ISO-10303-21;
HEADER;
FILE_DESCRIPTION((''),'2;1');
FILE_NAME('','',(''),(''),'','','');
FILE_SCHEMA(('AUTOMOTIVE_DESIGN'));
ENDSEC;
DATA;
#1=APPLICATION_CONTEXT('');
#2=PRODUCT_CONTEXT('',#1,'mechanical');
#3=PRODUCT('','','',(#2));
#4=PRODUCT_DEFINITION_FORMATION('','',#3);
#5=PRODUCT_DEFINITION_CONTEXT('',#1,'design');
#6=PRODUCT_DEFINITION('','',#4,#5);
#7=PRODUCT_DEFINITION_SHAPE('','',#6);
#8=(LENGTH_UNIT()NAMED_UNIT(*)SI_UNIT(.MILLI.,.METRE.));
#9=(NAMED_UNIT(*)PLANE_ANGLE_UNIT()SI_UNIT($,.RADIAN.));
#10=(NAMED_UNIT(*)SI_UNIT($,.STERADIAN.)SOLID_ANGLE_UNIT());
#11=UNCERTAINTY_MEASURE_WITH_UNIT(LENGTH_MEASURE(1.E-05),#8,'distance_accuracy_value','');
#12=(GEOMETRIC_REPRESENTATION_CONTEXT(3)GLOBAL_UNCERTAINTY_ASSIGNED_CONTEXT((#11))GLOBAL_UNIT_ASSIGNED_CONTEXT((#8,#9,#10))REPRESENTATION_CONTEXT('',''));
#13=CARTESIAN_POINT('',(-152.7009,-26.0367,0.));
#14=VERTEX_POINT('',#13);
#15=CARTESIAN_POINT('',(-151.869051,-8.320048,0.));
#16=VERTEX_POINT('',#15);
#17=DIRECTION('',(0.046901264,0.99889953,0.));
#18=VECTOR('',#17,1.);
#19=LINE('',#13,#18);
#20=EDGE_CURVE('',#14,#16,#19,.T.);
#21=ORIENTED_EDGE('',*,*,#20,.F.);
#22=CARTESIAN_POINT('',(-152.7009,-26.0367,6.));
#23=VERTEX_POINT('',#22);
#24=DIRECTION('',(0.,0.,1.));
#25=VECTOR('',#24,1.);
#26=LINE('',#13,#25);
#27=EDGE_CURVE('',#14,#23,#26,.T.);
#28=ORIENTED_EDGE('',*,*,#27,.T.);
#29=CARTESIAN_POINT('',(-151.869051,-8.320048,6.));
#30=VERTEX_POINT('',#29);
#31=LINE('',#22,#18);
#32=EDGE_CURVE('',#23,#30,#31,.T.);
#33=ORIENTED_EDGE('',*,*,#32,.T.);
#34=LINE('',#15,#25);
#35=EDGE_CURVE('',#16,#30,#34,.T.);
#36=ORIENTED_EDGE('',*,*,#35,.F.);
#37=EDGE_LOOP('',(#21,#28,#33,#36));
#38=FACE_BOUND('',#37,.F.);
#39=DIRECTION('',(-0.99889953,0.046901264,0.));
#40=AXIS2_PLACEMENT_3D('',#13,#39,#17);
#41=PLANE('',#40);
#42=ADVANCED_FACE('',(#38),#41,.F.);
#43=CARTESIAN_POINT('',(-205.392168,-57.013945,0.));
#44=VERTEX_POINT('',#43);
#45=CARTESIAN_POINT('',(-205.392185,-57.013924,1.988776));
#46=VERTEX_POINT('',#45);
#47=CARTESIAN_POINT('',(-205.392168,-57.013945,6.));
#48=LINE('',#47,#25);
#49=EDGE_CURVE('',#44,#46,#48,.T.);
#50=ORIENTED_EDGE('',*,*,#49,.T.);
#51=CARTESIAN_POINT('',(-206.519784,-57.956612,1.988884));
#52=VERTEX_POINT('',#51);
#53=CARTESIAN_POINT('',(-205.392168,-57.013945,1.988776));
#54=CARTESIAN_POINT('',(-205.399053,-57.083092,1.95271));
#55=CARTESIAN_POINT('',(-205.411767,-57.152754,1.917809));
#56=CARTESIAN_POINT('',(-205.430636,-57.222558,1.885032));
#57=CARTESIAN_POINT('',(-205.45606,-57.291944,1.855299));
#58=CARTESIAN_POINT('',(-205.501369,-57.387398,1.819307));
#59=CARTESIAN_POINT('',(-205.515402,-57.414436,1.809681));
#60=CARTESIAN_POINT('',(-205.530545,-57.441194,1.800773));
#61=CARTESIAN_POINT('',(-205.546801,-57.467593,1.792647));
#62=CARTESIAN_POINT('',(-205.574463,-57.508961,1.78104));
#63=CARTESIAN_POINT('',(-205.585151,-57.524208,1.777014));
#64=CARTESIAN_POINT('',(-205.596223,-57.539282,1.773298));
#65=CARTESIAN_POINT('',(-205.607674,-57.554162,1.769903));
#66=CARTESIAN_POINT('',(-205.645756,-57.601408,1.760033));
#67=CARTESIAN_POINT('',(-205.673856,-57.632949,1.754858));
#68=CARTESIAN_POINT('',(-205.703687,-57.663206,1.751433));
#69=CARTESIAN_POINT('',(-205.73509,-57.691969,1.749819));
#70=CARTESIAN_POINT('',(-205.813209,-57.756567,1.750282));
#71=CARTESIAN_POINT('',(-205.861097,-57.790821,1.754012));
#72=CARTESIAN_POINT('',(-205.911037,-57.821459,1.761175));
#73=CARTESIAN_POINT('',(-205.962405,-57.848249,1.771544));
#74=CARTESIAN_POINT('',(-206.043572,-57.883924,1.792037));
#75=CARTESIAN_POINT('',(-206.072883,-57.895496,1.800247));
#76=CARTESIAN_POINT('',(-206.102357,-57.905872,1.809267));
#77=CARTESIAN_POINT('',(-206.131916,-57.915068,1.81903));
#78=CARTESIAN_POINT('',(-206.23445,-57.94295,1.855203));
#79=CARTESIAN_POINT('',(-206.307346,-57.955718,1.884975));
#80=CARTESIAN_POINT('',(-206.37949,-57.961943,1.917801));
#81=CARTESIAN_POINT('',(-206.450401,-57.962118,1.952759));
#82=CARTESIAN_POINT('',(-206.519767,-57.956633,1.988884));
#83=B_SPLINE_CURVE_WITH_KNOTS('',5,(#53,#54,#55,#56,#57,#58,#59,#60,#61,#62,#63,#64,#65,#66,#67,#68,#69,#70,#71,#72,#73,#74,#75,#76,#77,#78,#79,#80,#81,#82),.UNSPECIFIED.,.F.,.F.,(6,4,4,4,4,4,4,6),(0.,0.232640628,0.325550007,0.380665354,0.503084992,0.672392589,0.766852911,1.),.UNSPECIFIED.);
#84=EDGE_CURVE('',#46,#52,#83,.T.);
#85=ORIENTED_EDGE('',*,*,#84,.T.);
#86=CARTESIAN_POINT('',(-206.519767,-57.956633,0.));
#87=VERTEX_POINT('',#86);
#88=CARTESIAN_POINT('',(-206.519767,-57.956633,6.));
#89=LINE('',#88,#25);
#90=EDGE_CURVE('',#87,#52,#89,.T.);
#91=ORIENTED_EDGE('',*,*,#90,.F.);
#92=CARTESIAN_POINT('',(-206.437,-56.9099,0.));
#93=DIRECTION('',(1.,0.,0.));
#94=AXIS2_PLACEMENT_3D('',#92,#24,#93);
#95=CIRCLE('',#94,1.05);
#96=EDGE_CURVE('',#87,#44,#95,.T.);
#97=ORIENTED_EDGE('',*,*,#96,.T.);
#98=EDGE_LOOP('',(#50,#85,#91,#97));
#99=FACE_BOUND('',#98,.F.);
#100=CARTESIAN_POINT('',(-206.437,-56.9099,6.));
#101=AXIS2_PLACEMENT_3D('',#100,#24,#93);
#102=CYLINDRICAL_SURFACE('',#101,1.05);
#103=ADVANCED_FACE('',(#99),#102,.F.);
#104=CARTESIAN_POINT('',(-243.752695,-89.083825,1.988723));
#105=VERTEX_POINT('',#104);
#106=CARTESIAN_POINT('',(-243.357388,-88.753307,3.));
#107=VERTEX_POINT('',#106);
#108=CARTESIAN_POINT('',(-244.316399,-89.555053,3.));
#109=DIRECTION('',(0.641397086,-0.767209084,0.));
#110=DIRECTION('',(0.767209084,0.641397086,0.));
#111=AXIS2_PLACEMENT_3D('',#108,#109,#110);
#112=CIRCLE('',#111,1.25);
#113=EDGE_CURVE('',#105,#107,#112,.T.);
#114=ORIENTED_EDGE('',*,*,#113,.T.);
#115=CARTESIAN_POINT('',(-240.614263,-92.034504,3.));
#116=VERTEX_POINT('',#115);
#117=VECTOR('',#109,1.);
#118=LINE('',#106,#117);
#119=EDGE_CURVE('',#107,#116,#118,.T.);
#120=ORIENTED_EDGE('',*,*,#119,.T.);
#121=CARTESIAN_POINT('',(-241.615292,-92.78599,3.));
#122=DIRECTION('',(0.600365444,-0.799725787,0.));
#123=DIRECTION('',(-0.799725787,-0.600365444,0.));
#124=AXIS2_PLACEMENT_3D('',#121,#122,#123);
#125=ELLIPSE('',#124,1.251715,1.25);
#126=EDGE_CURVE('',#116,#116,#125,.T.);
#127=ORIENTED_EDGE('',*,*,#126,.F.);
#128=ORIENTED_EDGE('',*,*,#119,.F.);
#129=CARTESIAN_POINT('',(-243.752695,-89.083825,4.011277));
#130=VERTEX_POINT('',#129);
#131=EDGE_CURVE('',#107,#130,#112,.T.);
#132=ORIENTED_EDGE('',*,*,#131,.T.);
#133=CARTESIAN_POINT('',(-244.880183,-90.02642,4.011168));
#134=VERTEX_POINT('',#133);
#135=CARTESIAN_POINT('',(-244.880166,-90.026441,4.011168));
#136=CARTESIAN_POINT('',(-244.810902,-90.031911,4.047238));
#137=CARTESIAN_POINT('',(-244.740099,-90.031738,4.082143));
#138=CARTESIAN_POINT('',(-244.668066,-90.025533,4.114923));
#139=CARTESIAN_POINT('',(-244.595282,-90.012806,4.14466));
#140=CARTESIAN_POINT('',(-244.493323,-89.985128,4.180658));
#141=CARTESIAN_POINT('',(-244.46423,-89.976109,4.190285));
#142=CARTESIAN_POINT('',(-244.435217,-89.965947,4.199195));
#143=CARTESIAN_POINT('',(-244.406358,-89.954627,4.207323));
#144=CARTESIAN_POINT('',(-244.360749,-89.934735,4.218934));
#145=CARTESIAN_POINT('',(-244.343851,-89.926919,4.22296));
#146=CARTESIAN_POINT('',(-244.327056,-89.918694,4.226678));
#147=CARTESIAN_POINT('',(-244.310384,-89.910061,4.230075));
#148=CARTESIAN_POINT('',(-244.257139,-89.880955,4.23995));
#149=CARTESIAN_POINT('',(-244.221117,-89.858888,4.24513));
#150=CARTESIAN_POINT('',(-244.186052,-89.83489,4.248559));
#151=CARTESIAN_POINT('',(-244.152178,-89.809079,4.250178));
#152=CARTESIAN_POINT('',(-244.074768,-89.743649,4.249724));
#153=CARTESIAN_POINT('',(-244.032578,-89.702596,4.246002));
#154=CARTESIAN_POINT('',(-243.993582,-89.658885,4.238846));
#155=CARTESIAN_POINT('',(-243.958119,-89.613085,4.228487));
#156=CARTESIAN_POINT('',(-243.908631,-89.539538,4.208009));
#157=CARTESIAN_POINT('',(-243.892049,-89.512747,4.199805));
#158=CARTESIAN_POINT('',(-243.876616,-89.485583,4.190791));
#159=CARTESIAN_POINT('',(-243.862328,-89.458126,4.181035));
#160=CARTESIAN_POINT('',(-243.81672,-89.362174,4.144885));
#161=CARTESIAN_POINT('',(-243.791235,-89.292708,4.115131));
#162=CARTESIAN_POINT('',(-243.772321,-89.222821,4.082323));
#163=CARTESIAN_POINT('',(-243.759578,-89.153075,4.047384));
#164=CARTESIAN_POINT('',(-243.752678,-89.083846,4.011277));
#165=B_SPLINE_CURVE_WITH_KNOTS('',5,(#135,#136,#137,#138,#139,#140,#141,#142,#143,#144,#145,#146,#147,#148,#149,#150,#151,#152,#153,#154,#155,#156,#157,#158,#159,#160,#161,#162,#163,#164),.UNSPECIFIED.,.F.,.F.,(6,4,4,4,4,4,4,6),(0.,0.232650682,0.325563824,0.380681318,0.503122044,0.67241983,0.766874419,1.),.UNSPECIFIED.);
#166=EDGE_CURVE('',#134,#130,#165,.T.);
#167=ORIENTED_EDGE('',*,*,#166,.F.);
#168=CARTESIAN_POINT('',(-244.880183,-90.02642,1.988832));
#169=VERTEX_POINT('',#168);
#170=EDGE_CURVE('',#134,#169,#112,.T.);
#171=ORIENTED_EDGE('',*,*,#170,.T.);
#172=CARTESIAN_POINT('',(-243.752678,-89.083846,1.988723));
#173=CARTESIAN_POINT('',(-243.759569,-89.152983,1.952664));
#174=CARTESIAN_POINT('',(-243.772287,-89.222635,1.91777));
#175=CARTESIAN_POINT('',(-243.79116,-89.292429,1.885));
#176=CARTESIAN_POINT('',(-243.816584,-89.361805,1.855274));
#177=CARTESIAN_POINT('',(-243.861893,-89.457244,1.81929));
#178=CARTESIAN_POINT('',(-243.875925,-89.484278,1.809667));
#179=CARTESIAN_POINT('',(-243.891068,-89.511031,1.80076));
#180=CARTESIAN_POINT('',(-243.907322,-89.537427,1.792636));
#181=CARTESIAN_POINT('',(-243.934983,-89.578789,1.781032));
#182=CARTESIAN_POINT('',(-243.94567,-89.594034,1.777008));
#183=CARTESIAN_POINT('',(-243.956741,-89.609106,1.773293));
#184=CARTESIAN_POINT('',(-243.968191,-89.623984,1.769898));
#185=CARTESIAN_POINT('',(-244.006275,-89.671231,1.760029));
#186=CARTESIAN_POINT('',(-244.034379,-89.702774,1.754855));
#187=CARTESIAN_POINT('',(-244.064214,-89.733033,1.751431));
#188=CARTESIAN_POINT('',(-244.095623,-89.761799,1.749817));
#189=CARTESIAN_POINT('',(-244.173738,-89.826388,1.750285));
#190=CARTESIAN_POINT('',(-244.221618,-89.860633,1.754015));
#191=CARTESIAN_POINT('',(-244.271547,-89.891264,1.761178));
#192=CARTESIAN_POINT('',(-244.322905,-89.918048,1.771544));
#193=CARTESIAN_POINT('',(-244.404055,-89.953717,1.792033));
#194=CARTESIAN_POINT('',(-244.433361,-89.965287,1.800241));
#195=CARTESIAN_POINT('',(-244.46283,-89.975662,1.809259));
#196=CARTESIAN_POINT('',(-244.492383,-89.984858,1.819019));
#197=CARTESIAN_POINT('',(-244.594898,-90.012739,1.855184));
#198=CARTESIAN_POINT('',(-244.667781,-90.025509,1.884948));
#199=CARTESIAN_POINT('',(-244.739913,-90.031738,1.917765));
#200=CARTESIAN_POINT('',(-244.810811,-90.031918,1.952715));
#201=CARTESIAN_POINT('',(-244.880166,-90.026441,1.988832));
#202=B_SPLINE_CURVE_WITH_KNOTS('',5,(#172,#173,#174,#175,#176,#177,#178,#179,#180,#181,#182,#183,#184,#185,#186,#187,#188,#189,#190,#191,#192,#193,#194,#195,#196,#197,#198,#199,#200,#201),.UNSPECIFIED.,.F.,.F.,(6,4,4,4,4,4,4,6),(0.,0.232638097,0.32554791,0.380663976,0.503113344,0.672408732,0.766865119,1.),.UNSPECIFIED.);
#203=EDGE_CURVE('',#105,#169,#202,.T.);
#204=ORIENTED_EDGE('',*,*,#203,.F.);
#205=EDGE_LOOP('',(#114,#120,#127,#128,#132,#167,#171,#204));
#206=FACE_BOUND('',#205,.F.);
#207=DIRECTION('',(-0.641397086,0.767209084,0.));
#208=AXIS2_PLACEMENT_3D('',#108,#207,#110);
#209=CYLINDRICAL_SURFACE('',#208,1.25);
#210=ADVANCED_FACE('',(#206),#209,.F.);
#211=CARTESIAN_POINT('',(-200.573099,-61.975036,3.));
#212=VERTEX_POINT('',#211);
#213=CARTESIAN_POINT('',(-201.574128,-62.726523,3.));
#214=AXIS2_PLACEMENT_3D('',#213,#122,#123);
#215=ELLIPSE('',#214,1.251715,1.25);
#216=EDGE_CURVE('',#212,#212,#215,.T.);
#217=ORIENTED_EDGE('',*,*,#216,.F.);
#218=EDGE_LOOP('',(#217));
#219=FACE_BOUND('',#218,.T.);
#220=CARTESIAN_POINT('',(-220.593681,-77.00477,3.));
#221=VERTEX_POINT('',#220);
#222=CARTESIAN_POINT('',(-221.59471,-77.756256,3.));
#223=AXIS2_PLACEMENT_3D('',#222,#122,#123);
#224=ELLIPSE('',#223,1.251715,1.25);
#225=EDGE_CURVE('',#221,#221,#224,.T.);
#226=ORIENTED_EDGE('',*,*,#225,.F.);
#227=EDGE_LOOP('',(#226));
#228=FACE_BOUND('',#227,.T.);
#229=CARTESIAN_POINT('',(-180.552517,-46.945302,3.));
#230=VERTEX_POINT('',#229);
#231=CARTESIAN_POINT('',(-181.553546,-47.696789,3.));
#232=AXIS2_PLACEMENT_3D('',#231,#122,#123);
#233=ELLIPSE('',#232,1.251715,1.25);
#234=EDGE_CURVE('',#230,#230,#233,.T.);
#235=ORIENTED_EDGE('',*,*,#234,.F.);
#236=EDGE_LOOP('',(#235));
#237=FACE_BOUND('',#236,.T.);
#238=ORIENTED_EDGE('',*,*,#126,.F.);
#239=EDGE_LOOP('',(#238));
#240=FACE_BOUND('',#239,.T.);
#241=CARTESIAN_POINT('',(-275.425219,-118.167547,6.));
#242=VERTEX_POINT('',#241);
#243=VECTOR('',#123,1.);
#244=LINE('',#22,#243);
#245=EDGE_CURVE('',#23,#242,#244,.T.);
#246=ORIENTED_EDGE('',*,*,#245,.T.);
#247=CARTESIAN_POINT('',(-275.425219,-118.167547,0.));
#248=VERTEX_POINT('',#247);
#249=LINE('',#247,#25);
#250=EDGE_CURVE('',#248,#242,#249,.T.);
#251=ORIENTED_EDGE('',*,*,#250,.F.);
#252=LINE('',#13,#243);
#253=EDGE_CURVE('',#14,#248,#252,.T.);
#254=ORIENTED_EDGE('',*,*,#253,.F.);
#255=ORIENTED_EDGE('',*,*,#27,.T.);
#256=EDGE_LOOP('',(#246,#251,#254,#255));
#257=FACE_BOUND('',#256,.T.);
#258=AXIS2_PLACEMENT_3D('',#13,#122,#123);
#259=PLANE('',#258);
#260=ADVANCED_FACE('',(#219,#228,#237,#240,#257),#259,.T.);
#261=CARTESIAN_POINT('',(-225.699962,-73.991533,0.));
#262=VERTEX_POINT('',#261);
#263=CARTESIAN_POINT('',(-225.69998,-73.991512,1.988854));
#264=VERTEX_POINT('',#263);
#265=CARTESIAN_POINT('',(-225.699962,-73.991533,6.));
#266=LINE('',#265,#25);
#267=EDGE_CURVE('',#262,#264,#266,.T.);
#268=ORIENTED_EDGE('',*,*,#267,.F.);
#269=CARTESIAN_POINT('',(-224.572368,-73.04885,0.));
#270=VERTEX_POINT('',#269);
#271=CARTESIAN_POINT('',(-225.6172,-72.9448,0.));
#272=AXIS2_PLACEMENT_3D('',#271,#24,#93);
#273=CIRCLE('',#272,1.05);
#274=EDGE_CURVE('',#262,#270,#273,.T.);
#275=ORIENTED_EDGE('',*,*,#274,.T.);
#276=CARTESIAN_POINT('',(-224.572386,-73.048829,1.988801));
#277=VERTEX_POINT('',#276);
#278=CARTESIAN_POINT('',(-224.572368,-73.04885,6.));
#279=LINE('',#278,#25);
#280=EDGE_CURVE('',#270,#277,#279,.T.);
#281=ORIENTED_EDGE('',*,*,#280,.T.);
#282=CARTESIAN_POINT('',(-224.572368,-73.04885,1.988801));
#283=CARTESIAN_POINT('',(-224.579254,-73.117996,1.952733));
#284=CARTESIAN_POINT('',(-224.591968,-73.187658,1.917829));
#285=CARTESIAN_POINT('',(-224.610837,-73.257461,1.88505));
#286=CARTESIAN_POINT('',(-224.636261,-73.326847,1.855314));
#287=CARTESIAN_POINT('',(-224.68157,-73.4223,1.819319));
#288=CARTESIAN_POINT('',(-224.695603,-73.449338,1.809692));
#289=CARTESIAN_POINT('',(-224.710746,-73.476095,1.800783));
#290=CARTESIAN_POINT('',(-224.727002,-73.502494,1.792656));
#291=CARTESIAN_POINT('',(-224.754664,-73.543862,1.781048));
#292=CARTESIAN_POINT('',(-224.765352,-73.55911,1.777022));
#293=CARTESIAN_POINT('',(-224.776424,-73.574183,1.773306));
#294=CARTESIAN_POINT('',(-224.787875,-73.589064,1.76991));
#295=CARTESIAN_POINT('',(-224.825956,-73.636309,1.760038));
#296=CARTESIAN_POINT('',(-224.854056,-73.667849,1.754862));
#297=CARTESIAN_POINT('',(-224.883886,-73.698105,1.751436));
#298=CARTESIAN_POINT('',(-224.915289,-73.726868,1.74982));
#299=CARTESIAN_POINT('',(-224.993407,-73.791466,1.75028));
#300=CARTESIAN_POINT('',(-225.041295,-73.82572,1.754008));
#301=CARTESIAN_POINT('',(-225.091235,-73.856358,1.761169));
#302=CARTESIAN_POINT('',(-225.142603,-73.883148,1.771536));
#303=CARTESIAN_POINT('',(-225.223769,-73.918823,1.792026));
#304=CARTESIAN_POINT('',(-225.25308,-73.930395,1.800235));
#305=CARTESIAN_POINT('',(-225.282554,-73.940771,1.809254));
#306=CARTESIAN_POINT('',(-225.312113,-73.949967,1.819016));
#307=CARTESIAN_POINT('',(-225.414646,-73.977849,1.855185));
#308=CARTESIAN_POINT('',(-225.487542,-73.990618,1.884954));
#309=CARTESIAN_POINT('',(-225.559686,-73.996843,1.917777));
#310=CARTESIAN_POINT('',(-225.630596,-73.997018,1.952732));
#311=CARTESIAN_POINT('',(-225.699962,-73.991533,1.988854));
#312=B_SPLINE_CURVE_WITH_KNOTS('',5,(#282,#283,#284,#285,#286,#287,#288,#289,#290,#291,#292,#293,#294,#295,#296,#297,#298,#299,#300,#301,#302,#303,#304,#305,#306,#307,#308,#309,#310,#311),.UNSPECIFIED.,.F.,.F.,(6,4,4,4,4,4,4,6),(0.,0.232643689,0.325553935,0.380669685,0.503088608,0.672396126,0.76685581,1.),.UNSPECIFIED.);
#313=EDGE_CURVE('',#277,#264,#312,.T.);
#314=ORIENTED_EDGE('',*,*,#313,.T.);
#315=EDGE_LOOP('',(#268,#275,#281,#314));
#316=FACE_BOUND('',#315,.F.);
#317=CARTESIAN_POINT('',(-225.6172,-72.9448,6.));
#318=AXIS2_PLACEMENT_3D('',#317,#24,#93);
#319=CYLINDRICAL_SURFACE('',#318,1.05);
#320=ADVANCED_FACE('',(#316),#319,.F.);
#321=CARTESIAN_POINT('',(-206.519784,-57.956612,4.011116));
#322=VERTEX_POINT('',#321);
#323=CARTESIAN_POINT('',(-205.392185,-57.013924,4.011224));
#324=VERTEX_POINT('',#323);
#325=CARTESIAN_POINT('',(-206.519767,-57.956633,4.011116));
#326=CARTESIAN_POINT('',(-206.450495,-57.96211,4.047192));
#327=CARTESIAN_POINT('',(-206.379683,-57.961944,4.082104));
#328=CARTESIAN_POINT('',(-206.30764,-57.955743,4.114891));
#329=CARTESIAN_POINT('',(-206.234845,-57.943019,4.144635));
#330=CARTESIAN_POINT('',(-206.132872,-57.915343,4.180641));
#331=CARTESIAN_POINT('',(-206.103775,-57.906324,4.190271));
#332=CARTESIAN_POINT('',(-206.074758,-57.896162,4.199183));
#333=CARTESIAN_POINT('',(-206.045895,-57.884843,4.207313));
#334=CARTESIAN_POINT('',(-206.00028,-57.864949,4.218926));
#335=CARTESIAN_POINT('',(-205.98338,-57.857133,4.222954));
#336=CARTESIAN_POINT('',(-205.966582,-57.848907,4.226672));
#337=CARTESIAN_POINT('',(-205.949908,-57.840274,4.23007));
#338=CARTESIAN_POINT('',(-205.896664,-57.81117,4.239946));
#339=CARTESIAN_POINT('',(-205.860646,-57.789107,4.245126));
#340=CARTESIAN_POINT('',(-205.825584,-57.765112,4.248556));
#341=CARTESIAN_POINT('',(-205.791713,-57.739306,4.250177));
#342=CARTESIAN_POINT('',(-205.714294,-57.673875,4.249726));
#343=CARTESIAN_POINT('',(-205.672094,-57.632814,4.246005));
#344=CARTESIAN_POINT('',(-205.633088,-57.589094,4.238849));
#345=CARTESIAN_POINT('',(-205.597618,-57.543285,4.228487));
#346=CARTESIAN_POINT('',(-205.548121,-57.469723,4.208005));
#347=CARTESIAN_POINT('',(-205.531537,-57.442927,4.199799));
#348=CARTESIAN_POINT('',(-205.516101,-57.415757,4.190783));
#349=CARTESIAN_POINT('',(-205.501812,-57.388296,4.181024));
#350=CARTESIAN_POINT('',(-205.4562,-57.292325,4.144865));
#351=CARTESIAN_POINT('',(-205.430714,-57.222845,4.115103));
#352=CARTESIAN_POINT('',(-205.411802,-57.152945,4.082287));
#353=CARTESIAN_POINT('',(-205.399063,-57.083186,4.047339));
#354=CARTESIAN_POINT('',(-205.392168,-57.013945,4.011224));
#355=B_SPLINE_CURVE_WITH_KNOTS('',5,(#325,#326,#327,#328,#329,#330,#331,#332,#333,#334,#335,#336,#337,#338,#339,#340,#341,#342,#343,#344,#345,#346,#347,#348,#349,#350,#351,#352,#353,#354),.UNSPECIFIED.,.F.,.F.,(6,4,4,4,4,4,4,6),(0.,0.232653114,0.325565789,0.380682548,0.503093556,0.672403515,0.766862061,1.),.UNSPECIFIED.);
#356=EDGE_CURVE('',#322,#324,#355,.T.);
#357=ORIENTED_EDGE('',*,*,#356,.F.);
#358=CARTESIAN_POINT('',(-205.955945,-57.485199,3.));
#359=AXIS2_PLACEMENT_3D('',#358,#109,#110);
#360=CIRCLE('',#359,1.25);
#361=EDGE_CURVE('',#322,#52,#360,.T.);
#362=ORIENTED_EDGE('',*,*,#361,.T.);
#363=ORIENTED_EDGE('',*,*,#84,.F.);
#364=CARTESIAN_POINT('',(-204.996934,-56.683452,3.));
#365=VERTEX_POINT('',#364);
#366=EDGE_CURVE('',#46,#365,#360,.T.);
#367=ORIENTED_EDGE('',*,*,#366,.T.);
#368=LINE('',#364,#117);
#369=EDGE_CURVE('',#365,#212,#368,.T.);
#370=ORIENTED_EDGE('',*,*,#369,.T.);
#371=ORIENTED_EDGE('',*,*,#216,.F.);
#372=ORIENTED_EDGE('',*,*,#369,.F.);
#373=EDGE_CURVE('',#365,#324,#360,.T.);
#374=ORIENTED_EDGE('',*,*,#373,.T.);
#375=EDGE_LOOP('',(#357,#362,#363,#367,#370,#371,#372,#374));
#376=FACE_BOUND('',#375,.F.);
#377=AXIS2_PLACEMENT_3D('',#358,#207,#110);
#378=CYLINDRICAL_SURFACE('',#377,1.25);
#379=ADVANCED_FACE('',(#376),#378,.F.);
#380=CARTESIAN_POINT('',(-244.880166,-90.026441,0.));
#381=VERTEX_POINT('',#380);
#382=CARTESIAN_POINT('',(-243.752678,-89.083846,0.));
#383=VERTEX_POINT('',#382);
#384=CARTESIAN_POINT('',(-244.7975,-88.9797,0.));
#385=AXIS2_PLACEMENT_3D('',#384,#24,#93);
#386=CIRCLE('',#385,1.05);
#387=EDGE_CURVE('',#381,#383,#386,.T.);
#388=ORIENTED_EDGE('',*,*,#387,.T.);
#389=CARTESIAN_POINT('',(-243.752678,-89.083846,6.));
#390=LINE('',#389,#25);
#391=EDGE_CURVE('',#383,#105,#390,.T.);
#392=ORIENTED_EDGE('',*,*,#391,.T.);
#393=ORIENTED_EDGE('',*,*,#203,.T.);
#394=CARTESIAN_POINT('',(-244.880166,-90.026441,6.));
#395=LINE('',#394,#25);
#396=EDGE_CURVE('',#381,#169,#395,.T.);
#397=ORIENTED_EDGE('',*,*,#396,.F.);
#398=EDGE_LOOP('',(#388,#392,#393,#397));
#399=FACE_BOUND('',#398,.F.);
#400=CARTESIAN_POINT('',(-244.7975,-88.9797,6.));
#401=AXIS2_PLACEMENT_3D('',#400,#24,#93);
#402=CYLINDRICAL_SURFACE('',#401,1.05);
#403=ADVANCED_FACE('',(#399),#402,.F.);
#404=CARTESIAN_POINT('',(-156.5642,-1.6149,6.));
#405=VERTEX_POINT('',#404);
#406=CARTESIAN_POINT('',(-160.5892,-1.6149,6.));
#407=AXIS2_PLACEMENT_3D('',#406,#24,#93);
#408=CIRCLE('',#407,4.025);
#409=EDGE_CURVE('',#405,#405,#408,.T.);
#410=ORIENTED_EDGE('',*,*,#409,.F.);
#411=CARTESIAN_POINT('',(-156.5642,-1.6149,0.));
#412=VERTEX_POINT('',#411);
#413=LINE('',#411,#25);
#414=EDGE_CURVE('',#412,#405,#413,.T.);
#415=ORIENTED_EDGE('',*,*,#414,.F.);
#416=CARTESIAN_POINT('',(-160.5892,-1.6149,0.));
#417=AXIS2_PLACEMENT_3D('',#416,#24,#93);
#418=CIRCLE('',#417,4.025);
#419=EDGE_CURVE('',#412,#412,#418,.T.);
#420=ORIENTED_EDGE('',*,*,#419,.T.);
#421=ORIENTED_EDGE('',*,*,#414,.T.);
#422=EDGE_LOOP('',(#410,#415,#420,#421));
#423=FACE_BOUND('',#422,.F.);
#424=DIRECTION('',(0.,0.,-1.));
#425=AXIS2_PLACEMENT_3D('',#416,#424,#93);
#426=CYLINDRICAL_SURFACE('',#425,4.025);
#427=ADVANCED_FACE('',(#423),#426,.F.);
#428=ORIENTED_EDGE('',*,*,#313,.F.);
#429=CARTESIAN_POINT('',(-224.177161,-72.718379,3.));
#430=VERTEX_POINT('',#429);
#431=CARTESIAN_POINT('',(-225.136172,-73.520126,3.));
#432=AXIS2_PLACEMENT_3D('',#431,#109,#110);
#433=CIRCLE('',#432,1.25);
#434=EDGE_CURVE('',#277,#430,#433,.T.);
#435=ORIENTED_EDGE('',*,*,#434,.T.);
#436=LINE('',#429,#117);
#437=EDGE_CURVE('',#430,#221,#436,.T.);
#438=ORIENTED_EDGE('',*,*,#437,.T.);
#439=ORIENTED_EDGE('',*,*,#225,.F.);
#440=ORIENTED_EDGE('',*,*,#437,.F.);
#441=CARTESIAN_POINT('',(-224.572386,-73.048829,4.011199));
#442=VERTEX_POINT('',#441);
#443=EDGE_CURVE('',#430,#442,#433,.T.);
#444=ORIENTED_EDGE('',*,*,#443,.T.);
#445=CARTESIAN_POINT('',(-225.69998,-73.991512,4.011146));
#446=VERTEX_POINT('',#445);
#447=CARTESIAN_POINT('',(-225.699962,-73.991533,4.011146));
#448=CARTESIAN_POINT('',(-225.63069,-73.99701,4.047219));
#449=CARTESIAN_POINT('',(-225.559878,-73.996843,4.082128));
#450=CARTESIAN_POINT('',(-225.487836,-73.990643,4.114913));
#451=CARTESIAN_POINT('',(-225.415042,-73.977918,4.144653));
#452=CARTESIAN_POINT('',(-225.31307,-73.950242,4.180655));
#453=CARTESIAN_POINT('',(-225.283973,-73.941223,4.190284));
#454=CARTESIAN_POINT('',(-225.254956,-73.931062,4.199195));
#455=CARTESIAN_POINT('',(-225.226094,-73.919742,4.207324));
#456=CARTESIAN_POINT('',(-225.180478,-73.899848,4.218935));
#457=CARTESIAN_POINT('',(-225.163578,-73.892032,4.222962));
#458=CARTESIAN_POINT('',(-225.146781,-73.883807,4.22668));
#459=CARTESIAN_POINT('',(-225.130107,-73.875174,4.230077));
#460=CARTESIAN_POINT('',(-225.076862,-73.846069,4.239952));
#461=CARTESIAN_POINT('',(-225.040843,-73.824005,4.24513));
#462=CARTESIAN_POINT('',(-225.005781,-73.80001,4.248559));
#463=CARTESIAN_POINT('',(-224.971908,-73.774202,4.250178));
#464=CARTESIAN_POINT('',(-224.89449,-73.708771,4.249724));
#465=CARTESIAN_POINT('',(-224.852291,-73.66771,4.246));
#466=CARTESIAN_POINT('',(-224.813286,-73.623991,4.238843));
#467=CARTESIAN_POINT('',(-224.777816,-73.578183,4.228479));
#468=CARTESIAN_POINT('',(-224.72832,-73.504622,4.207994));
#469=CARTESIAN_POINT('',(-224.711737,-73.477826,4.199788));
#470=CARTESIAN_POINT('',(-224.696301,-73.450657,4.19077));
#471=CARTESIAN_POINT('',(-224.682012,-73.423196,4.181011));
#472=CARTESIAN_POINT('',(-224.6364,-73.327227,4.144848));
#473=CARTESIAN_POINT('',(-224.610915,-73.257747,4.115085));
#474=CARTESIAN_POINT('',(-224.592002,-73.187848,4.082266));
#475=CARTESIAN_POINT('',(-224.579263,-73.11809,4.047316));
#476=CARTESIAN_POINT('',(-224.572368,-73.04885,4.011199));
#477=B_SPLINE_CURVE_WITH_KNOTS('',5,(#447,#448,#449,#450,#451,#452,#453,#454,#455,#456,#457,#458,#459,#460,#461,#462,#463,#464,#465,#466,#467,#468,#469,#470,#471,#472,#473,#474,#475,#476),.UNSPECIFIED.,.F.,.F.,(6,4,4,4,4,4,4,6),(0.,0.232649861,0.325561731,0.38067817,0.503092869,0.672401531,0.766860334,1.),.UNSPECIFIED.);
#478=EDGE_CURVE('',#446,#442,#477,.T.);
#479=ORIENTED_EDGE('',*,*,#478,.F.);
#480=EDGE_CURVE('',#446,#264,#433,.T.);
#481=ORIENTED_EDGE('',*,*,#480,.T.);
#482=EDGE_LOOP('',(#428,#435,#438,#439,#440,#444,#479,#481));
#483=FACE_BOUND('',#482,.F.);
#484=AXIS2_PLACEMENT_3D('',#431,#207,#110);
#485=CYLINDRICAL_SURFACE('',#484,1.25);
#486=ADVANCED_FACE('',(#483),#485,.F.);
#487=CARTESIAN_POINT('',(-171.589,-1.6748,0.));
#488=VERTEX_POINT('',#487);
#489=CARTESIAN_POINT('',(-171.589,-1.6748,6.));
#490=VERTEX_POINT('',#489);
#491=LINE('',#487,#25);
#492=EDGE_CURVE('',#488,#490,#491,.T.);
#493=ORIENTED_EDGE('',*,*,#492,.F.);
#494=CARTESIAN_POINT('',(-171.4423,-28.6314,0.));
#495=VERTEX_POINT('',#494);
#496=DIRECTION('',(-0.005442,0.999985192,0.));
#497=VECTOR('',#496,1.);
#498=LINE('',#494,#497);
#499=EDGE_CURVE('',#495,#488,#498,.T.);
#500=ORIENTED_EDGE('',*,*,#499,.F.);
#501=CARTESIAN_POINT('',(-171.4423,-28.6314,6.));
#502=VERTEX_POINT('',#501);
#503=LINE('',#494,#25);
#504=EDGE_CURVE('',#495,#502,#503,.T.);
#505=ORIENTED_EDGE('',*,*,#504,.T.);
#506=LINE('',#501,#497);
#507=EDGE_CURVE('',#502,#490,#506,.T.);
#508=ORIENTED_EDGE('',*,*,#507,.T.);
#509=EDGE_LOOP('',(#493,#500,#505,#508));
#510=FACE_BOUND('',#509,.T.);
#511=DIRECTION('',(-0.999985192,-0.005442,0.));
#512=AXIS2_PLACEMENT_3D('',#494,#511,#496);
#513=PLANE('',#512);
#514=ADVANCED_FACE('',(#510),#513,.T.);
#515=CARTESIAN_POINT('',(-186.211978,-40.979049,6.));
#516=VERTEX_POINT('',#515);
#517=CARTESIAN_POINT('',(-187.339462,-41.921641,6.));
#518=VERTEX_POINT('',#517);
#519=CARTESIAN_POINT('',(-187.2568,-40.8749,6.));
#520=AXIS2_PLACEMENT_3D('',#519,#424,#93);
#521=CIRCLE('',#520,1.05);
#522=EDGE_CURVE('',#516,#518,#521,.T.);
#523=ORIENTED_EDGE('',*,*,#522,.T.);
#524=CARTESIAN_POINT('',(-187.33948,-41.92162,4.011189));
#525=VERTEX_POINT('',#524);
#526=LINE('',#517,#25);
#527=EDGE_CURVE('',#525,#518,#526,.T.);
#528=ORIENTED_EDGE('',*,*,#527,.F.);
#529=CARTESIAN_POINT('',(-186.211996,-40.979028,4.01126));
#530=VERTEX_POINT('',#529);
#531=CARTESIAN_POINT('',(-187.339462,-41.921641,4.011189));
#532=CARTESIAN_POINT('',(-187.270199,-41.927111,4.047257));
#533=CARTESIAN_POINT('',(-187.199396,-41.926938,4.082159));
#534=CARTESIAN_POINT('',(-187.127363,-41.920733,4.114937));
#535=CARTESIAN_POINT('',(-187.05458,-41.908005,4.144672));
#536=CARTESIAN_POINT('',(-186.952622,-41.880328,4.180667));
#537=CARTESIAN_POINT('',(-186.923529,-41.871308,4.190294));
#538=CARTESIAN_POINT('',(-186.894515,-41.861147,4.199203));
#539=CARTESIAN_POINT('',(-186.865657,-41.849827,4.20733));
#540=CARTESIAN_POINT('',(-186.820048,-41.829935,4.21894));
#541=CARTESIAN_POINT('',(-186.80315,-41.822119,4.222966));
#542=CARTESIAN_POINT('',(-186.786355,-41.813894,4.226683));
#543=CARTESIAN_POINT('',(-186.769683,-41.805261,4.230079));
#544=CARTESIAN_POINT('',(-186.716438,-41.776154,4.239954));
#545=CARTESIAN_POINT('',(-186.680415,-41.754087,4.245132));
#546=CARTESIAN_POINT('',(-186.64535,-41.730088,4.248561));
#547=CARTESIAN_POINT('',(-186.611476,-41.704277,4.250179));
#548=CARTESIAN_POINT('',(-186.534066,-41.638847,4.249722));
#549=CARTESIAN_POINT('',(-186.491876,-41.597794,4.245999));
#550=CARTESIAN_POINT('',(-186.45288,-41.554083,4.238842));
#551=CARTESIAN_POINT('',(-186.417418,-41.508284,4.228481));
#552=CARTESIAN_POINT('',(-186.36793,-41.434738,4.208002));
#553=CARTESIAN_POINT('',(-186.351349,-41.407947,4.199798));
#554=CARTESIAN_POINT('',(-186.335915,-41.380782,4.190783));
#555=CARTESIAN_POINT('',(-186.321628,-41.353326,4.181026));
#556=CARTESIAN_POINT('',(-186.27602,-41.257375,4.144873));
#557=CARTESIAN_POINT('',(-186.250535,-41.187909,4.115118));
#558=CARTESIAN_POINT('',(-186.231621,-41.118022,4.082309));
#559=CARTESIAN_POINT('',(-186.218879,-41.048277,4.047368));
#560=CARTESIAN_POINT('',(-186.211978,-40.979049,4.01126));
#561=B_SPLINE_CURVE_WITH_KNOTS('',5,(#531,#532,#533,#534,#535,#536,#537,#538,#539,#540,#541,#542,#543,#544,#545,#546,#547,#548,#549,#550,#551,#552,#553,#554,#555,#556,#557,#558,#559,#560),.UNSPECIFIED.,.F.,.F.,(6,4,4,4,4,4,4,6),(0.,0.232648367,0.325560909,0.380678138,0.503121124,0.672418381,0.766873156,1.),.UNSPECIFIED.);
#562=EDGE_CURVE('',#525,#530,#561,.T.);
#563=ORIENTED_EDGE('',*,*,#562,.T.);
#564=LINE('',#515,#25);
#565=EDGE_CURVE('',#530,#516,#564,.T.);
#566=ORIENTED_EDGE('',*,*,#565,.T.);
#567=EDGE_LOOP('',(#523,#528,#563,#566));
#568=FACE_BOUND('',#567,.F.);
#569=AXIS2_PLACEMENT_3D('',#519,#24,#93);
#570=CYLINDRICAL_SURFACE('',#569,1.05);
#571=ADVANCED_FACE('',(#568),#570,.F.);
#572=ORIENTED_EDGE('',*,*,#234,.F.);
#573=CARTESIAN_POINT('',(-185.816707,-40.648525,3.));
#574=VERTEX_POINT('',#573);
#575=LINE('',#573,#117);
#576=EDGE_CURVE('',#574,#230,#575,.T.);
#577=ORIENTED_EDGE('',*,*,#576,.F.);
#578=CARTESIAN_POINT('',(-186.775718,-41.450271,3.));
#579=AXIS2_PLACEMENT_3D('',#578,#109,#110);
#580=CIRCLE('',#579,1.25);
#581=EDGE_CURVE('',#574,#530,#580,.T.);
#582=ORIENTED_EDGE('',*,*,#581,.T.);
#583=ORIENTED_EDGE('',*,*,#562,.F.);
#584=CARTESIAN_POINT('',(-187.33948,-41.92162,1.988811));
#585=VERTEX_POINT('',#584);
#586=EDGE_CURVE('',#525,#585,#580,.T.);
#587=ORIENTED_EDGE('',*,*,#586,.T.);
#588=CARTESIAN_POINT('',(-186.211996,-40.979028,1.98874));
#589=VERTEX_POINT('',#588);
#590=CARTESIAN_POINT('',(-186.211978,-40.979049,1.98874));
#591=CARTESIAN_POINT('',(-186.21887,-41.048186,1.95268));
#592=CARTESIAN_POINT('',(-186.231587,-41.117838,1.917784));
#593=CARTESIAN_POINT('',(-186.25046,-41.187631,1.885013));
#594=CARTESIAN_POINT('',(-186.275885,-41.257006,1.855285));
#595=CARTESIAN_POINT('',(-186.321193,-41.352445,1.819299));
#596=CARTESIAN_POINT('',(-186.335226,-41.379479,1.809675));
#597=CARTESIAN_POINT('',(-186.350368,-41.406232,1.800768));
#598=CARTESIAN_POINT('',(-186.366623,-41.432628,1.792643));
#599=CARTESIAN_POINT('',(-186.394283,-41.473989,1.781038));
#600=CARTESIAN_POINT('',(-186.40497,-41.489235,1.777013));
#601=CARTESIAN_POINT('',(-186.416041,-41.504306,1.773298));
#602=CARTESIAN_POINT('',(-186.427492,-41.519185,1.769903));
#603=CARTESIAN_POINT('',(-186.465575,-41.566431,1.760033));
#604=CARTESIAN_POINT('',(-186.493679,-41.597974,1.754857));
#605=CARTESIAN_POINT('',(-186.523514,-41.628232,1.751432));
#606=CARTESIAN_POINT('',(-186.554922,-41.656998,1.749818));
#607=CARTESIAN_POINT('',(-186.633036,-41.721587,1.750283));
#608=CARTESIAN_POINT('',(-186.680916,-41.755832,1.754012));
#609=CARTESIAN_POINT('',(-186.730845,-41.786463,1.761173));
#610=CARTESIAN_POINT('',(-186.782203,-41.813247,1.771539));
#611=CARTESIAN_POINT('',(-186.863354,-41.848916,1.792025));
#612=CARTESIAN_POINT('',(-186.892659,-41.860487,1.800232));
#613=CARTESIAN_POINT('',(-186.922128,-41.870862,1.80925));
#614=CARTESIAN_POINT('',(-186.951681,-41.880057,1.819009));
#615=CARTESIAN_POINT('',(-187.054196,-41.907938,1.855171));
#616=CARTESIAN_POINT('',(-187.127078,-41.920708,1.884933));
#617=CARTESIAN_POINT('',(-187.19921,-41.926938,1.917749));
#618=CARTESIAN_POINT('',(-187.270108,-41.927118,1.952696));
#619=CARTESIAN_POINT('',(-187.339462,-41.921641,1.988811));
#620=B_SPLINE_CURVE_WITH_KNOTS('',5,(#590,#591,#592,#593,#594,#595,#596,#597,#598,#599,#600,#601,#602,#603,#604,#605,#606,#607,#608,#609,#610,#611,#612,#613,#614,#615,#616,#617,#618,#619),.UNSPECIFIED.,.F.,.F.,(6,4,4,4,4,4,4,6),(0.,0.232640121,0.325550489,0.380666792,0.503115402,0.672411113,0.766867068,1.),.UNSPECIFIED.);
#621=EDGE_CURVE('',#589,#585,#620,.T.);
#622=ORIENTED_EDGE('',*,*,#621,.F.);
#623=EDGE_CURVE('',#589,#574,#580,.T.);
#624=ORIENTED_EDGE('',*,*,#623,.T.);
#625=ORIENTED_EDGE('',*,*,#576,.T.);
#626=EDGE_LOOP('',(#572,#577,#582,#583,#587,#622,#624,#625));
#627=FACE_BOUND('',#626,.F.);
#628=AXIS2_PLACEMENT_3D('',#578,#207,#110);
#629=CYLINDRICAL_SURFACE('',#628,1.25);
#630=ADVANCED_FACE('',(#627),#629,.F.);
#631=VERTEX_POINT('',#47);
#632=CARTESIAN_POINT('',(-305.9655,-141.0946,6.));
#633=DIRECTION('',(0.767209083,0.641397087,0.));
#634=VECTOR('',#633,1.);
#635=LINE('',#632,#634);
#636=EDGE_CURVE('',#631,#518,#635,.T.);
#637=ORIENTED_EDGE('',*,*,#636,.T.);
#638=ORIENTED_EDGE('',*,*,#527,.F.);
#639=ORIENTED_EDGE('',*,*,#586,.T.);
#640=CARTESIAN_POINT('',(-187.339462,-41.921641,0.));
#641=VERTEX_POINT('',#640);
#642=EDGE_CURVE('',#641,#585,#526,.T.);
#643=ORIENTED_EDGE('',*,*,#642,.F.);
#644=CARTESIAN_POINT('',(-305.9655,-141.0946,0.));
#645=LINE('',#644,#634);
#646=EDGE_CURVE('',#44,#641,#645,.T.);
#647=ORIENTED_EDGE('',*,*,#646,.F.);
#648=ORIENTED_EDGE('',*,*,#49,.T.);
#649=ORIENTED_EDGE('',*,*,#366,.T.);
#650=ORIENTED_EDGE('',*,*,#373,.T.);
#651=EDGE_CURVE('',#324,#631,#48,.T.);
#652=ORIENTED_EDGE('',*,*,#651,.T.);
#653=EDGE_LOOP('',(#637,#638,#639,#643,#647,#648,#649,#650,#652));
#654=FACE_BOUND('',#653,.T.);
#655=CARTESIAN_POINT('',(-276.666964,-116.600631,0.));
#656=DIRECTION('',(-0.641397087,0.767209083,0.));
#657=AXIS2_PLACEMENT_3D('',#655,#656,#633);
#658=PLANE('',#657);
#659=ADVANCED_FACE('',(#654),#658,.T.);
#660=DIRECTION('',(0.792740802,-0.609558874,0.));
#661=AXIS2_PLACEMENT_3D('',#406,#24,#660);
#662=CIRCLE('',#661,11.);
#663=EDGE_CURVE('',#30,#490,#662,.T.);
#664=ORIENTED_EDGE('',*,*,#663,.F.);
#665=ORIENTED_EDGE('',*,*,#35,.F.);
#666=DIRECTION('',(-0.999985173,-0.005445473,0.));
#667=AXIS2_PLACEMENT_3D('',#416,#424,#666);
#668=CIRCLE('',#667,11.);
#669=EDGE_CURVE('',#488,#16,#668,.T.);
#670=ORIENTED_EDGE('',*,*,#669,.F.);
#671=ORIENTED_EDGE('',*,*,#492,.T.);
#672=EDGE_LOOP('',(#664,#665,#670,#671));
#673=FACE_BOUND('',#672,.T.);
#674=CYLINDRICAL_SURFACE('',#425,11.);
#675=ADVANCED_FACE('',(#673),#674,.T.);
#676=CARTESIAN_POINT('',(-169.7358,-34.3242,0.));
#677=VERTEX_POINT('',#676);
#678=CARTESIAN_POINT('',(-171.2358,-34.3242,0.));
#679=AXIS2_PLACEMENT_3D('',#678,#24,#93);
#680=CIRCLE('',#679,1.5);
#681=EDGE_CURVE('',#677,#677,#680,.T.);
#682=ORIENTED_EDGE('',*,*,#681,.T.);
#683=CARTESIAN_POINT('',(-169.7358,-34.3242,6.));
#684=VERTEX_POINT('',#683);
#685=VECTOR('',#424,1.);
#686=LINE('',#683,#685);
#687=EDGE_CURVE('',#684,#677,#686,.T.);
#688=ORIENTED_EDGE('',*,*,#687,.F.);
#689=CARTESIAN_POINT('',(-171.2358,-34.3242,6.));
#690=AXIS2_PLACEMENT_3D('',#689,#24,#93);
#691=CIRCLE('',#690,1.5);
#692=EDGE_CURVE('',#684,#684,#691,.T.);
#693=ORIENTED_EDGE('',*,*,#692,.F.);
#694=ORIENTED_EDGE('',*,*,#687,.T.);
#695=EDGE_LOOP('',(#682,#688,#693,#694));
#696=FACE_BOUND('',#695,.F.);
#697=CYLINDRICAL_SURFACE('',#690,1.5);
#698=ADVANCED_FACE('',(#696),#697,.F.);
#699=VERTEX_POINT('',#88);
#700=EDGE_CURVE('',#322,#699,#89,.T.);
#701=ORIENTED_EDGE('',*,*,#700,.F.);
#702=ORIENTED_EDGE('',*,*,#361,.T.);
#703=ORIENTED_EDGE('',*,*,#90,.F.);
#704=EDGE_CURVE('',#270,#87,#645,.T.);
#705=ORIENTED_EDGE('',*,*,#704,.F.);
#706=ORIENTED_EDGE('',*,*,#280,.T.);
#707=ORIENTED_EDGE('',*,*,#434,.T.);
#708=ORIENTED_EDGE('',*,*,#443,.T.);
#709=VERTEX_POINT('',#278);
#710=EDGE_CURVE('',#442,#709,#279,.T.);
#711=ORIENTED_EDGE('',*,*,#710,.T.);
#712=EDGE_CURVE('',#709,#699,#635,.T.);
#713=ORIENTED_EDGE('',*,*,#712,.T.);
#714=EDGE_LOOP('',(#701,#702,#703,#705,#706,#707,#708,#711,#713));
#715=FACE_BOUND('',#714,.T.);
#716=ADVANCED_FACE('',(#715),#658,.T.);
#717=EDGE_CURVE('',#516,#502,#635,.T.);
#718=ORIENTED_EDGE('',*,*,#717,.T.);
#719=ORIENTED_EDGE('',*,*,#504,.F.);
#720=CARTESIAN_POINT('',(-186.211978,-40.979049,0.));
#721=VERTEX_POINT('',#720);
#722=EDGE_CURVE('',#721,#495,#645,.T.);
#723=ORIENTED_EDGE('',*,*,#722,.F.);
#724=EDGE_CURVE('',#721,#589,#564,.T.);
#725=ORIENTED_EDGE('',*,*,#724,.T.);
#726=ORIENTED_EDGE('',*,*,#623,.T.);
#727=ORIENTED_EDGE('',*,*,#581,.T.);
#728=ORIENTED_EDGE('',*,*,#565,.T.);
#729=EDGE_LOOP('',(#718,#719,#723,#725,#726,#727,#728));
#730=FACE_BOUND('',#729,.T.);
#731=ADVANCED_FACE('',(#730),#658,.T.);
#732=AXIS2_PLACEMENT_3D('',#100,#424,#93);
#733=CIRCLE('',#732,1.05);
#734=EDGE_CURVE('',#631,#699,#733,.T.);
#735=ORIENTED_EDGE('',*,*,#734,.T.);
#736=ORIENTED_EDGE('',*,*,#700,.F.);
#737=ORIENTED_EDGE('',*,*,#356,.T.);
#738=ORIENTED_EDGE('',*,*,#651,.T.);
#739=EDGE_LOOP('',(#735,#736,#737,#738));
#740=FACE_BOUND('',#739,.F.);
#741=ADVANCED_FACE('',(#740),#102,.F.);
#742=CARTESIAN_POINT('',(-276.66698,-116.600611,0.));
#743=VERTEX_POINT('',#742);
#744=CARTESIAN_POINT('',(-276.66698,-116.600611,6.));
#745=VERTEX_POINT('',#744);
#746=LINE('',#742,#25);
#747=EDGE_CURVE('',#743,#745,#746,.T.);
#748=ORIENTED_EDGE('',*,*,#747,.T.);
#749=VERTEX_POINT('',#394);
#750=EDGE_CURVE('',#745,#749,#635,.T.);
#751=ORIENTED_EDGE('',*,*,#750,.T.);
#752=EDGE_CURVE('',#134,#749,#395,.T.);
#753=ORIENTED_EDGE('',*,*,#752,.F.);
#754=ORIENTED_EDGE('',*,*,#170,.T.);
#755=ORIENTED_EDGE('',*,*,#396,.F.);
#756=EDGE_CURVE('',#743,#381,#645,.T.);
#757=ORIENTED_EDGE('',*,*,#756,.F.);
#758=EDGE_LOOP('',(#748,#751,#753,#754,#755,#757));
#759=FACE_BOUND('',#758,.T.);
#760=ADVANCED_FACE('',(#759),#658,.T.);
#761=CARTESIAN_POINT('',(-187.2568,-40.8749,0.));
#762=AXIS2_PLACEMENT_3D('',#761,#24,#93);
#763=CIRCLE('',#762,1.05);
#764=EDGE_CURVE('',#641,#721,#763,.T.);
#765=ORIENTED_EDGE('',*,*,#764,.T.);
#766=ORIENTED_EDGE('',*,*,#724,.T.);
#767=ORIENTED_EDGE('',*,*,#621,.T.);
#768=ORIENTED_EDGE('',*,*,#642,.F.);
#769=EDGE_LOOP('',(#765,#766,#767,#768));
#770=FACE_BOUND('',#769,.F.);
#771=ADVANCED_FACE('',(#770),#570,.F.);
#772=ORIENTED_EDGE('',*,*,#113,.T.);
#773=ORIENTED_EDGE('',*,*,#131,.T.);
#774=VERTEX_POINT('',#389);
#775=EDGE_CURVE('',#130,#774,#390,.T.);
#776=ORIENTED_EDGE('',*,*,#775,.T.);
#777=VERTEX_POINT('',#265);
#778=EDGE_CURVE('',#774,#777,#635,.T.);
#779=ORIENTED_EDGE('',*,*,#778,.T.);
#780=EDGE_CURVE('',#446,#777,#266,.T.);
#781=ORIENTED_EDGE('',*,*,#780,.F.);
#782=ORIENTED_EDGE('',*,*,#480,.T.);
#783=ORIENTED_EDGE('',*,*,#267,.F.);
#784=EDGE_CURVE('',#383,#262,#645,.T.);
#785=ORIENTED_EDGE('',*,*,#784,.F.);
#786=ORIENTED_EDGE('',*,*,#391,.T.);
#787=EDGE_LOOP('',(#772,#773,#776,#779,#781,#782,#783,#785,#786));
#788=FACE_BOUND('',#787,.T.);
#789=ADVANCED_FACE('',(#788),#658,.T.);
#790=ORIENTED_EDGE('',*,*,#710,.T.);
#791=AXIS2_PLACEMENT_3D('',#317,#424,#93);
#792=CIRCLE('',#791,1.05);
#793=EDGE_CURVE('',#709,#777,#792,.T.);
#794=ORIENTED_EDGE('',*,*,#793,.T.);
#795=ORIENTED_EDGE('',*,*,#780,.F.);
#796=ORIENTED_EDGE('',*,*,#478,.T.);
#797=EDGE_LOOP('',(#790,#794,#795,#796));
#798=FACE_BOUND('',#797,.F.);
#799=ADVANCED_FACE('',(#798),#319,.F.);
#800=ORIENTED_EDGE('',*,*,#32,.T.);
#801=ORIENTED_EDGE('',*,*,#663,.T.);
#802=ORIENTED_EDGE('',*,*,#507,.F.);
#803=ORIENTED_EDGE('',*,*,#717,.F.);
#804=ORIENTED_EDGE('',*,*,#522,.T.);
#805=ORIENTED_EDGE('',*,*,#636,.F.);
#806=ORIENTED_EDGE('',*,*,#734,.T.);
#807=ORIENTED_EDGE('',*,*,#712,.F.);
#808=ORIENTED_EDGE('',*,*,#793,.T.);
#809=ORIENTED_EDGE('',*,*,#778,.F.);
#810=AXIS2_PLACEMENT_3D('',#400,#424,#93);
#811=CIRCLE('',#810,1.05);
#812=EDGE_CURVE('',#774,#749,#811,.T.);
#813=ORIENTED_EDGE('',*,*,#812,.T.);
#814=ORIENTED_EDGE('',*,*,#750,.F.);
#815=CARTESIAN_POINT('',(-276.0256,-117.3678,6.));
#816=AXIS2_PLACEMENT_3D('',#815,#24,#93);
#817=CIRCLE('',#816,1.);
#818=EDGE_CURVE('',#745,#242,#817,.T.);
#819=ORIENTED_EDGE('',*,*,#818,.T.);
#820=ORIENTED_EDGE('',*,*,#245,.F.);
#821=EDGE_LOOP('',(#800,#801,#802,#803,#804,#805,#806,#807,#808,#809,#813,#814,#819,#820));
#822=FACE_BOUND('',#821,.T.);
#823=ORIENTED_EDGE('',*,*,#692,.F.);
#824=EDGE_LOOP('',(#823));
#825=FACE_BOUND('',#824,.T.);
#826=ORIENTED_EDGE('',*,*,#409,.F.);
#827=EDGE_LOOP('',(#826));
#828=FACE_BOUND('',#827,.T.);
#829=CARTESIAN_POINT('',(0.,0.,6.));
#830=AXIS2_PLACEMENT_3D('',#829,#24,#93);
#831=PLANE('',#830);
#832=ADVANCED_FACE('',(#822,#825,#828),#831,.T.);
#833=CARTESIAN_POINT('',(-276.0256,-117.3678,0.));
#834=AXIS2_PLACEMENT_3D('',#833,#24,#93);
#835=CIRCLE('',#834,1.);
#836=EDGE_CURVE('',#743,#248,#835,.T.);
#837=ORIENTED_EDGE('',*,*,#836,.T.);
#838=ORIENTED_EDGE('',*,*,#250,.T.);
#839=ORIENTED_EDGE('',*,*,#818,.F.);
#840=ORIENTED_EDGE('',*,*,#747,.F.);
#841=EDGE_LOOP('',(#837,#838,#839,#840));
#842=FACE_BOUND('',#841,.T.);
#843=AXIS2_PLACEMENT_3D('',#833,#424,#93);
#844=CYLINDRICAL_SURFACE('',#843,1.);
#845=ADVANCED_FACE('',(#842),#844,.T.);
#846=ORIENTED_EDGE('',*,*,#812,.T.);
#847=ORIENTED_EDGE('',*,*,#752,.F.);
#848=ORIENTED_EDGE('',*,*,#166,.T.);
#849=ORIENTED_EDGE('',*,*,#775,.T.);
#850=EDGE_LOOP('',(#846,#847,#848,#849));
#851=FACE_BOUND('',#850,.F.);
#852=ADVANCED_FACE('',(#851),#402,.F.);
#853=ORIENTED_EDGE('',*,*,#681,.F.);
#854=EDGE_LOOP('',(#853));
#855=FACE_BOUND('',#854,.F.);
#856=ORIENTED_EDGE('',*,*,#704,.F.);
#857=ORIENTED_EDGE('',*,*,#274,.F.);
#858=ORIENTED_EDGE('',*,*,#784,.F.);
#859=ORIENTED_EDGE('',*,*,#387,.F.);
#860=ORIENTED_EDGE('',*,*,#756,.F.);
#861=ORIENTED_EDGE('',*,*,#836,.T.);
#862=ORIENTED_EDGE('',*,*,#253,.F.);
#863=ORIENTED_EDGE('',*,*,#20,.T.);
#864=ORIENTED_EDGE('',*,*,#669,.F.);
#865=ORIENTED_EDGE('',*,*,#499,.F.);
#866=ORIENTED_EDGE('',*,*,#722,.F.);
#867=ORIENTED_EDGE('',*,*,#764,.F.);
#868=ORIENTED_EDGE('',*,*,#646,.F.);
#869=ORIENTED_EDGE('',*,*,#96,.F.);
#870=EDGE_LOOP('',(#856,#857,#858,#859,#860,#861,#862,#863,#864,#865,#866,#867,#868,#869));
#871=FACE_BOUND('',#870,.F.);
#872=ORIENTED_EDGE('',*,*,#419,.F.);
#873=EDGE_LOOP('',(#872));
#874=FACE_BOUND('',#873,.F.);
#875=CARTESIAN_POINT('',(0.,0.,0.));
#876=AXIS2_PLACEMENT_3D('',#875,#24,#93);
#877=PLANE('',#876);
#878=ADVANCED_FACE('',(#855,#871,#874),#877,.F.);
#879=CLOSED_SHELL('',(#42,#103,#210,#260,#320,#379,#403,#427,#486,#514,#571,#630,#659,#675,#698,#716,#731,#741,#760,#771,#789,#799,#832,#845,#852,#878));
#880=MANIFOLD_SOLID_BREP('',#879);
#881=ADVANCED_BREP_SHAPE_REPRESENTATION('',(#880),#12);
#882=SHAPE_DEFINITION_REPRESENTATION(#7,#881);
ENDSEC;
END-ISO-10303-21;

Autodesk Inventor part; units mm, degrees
ref_plane "YZ Plane" through (0, 0, 0) normal (1, 0, 0) x (0, 1, 0)
ref_plane "XZ Plane" through (0, 0, 0) normal (0, 1, 0) x (-1, 0, 0)
ref_plane "XY Plane" through (0, 0, 0) normal (0, 0, 1) x (1, 0, 0)
sketch "スケッチ1" plane through (0, 0, 0) normal (0, 0, 1) x (1, 0, 0)
  circle A0 centre (-149.101, -13.3308) radius 1.5 construction
  circle A1 centre (-160.5892, -1.6149) radius 1.5 construction
  circle A2 centre (-44.4492, 64.0137) radius 1.5 construction
  circle A3 centre (-64.4423, 49.0046) radius 1.5 construction
  circle A4 centre (-60.4494, 64.5064) radius 1.5 construction
  arc A5 (-40.2316, 58.3956) -> (-44.233, 71.0354) centre (-44.4492, 64.0137) ccw construction
  line L0 (-44.233, 71.0354) -> (-60.2332, 71.5281) construction
  arc A6 (-60.2332, 71.5281) -> (-64.1725, 70.4637) centre (-60.4494, 64.5064) ccw construction
  line L1 (-64.1725, 70.4637) -> (-165.9022, 6.8864) construction
  arc A7 (-165.9022, 6.8864) -> (-166.8262, -9.4635) centre (-160.5892, -1.6149) ccw construction
  line L2 (-166.8262, -9.4635) -> (-154.0782, -19.594) construction
  arc A8 (-154.0782, -19.594) -> (-144.2981, -19.7286) centre (-149.101, -13.3308) ccw construction
  line L3 (-144.2981, -19.7286) -> (-40.2316, 58.3956) construction
  circle A9 centre (-82.1645, 51.5544) radius 1.5 construction
  circle A10 centre (-141.748, 14.817) radius 1.5 construction
  circle A11 centre (-89.4637, 29.5642) radius 1.5 construction
  circle A12 centre (-117.4541, 8.5514) radius 1.5 construction
  circle A13 centre (-111.8449, 33.0052) radius 1.5 construction
  line L4 (-152.7009, -26.0367) -> (-305.9655, -141.0946)
  circle A14 centre (-149.101, -13.3308) radius 1.5 construction
  circle A15 centre (-149.101, -13.3308) radius 3 construction
  circle A16 centre (-149.101, -13.3308) radius 3 construction
  circle A17 centre (-160.5892, -1.6149) radius 9.025 construction
  circle A18 centre (-160.5892, -1.6149) radius 4.025
  line L5 (-152.7009, -26.0367) -> (-151.5741, -2.0382)
  line L6 (-64.1725, 70.4637) -> (-165.9022, 6.8864) construction
  line L7 (-144.2981, -19.7286) -> (-40.2316, 58.3956) construction
  line L8 (-305.9655, -141.0946) -> (-171.4423, -28.6314)
  line L9 (-160.5892, -1.6149) -> (-146.0204, -21.0215) construction
  line L10 (-146.0204, -21.0215) -> (-305.9655, -141.0946) construction
  circle A19 centre (-276.0256, -117.3678) radius 1
  circle A20 centre (-160.5892, -1.6149) radius 11
  line L11 (-171.4423, -28.6314) -> (-171.589, -1.6748)
  point P0 (0, 0)
  point P1 (0, 0)
  point P2 (-276.667, -116.6006)
  point P3 (-275.4252, -118.1676)
  point P4 (-151.8691, -8.3201)
  dimension "d6" = 22
  dimension "d0" = 6
  dimension "d1" = 8.05
  dimension "d2" = 5
  dimension "d3" = 3
  dimension "d4" = 200
  dimension "d5" = 2
  dimension "d7" = 3
  dimension "d8" = 6
extrude "押し出し1" add sketch "スケッチ1" along normal blind 6 contours L4 A19 L8 L11 A20 L5 | A19 | A20
sketch "スケッチ2" plane through (0, 0, 6) normal (0, 0, 1) x (1, 0, 0)
  line L0 (-171.589, -1.6748) -> (-171.4423, -28.6314) projected
  line L1 (-171.4423, -28.6314) -> (-276.667, -116.6006) projected
  arc A0 (-276.667, -116.6006) -> (-275.4252, -118.1676) centre (-276.0256, -117.3678) ccw projected
  line L2 (-275.4252, -118.1676) -> (-152.7009, -26.0367) projected
  line L3 (-152.7009, -26.0367) -> (-151.8691, -8.3201) projected
  arc A1 (-151.8691, -8.3201) -> (-171.589, -1.6748) centre (-160.5892, -1.6149) ccw projected
  circle A2 centre (-160.5892, -1.6149) radius 4.025 projected
  circle A3 centre (-171.2358, -34.3242) radius 1.5
  circle A4 centre (-171.2358, -34.3242) radius 3
  circle A5 centre (-171.2358, -34.3242) radius 4.5
  point P0 (0, 0)
  dimension "d11" = 3
  dimension "d12" = 6
  dimension "d13" = 9
extrude "押し出し2" cut sketch "スケッチ2" against normal through all contours A3
sketch "スケッチ3" plane through (0, 0, 6) normal (0, 0, 1) x (1, 0, 0)
  line L0 (-171.4423, -28.6314) -> (-276.667, -116.6006) projected
  circle A0 centre (-244.7975, -88.9797) radius 1.05
  circle A1 centre (-225.6172, -72.9448) radius 1.05
  circle A2 centre (-206.437, -56.9099) radius 1.05
  circle A3 centre (-187.2568, -40.8749) radius 1.05
  point P0 (0, 0)
  dimension "d16" = 2.1
  dimension "d17" = 2.1
  dimension "d18" = 2.1
  dimension "d19" = 2.1
  dimension "d20" = 0.75
  dimension "d21" = 0.75
  dimension "d22" = 0.75
  dimension "d23" = 0.75
  dimension "d24" = 20
  dimension "d25" = 25
  dimension "d26" = 25
  dimension "d27" = 25
extrude "押し出し3" cut sketch "スケッチ3" against normal through all
sketch "スケッチ4" plane through (-205.3922, -57.0139, 6) normal (-0.6413971, 0.7672091, 0) x (0.7672091, 0.6413971, 0)
  line L0 (-25, 6) -> (-25, 0) projected
  line L1 (-1.4697, 0) -> (-25, 0) projected
  line L2 (-1.4697, 0) -> (-1.4697, 6) projected
  line L3 (-1.4697, 6) -> (-25, 6) projected
  line L4 (-26.4697, 0) -> (-26.4697, 6) projected
  line L5 (-26.4697, 6) -> (-50, 6) projected
  line L6 (-50, 6) -> (-50, 0) projected
  line L7 (-26.4697, 0) -> (-50, 0) projected
  line L8 (-51.4697, 0) -> (-51.4697, 6) projected
  line L9 (-51.4697, 6) -> (-92.9014, 6) projected
  line L10 (-92.9014, 6) -> (-92.9014, 0) projected
  line L11 (-51.4697, 0) -> (-92.9014, 0) projected
  line L12 (0, 6) -> (0, 0) projected
  line L13 (23.5303, 0) -> (0, 0) projected
  line L14 (23.5303, 0) -> (23.5303, 6) projected
  line L15 (23.5303, 6) -> (0, 6) projected
  line L16 (25, 6) -> (25, 0) projected
  line L17 (44.2511, 0) -> (25, 0) projected
  line L18 (44.2511, 6) -> (44.2511, 0) projected
  line L19 (44.2511, 6) -> (25, 6) projected
  circle A0 centre (-50.7348, 3) radius 1.25
  circle A1 centre (-25.7348, 3) radius 1.25
  circle A2 centre (-0.7348, 3) radius 1.25
  circle A3 centre (24.2652, 3) radius 1.25
  line L20 (23.5303, 6) -> (25, 6) projected
  line L21 (-1.4697, 6) -> (0, 6) projected
  line L22 (-26.4697, 6) -> (-25, 6) projected
  line L23 (-51.4697, 6) -> (-50, 6) projected
  point P0 (194.1473, 6)
  point P1 (-51.4697, 3)
  point P2 (-26.4697, 3)
  point P3 (-50.7348, 6)
  point P4 (-25.7348, 6)
  point P5 (-0.7348, 6)
  point P6 (24.2652, 6)
  point P7 (23.5303, 3)
  point P8 (-1.4697, 3)
  dimension "d30" = 2.5
  dimension "d31" = 2.5
  dimension "d32" = 2.5
  dimension "d33" = 2.5
extrude "押し出し4" cut sketch "スケッチ4" against normal through all contours A1 L0 | L0 A1 L4 | L4 A1 | A2 L12 L2 | L2 A2 | A2 L12 | A0 L6 | L6 A0 L8 | A3 L16 L14 | L14 A3 | L8 A0 | A3 L16
sketch "スケッチ5" plane through (0, 0, 6) normal (0, 0, 1) x (1, 0, 0)
  arc A0 (-225.7, -73.9915) -> (-224.5724, -73.0489) centre (-225.6172, -72.9448) ccw projected
  line L0 (-225.7, -73.9915) -> (-243.7526, -89.0838) projected
  arc A1 (-244.8802, -90.0264) -> (-243.7526, -89.0838) centre (-244.7975, -88.9797) ccw projected
  line L1 (-244.8802, -90.0264) -> (-276.667, -116.6006) projected
  arc A2 (-276.667, -116.6006) -> (-275.4252, -118.1676) centre (-276.0256, -117.3678) ccw projected
  line L2 (-275.4252, -118.1676) -> (-152.7009, -26.0367) projected
  line L3 (-152.7009, -26.0367) -> (-151.8691, -8.3201) projected
  arc A3 (-151.8691, -8.3201) -> (-171.589, -1.6748) centre (-160.5892, -1.6149) ccw projected
  line L4 (-171.589, -1.6748) -> (-171.4423, -28.6314) projected
  line L5 (-171.4423, -28.6314) -> (-186.2119, -40.979) projected
  arc A4 (-187.3395, -41.9217) -> (-186.2119, -40.979) centre (-187.2568, -40.8749) ccw projected
  line L6 (-187.3395, -41.9217) -> (-205.3922, -57.0139) projected
  arc A5 (-206.5197, -57.9566) -> (-205.3922, -57.0139) centre (-206.437, -56.9099) ccw projected
  line L7 (-206.5197, -57.9566) -> (-224.5724, -73.0489) projected
  circle A6 centre (-171.2358, -34.3242) radius 1.5 projected
  circle A7 centre (-160.5892, -1.6149) radius 4.025 projected
  point P0 (0, 0)
equation "\"d8\" = d0"
equation "\"d21\" = d20"
equation "\"d22\" = d21"
equation "\"d23\" = d21"
equation "\"d26\" = d25"
equation "\"d27\" = d26"
properties part number "アームシールド根本1" material "アルミニウム 7075"
